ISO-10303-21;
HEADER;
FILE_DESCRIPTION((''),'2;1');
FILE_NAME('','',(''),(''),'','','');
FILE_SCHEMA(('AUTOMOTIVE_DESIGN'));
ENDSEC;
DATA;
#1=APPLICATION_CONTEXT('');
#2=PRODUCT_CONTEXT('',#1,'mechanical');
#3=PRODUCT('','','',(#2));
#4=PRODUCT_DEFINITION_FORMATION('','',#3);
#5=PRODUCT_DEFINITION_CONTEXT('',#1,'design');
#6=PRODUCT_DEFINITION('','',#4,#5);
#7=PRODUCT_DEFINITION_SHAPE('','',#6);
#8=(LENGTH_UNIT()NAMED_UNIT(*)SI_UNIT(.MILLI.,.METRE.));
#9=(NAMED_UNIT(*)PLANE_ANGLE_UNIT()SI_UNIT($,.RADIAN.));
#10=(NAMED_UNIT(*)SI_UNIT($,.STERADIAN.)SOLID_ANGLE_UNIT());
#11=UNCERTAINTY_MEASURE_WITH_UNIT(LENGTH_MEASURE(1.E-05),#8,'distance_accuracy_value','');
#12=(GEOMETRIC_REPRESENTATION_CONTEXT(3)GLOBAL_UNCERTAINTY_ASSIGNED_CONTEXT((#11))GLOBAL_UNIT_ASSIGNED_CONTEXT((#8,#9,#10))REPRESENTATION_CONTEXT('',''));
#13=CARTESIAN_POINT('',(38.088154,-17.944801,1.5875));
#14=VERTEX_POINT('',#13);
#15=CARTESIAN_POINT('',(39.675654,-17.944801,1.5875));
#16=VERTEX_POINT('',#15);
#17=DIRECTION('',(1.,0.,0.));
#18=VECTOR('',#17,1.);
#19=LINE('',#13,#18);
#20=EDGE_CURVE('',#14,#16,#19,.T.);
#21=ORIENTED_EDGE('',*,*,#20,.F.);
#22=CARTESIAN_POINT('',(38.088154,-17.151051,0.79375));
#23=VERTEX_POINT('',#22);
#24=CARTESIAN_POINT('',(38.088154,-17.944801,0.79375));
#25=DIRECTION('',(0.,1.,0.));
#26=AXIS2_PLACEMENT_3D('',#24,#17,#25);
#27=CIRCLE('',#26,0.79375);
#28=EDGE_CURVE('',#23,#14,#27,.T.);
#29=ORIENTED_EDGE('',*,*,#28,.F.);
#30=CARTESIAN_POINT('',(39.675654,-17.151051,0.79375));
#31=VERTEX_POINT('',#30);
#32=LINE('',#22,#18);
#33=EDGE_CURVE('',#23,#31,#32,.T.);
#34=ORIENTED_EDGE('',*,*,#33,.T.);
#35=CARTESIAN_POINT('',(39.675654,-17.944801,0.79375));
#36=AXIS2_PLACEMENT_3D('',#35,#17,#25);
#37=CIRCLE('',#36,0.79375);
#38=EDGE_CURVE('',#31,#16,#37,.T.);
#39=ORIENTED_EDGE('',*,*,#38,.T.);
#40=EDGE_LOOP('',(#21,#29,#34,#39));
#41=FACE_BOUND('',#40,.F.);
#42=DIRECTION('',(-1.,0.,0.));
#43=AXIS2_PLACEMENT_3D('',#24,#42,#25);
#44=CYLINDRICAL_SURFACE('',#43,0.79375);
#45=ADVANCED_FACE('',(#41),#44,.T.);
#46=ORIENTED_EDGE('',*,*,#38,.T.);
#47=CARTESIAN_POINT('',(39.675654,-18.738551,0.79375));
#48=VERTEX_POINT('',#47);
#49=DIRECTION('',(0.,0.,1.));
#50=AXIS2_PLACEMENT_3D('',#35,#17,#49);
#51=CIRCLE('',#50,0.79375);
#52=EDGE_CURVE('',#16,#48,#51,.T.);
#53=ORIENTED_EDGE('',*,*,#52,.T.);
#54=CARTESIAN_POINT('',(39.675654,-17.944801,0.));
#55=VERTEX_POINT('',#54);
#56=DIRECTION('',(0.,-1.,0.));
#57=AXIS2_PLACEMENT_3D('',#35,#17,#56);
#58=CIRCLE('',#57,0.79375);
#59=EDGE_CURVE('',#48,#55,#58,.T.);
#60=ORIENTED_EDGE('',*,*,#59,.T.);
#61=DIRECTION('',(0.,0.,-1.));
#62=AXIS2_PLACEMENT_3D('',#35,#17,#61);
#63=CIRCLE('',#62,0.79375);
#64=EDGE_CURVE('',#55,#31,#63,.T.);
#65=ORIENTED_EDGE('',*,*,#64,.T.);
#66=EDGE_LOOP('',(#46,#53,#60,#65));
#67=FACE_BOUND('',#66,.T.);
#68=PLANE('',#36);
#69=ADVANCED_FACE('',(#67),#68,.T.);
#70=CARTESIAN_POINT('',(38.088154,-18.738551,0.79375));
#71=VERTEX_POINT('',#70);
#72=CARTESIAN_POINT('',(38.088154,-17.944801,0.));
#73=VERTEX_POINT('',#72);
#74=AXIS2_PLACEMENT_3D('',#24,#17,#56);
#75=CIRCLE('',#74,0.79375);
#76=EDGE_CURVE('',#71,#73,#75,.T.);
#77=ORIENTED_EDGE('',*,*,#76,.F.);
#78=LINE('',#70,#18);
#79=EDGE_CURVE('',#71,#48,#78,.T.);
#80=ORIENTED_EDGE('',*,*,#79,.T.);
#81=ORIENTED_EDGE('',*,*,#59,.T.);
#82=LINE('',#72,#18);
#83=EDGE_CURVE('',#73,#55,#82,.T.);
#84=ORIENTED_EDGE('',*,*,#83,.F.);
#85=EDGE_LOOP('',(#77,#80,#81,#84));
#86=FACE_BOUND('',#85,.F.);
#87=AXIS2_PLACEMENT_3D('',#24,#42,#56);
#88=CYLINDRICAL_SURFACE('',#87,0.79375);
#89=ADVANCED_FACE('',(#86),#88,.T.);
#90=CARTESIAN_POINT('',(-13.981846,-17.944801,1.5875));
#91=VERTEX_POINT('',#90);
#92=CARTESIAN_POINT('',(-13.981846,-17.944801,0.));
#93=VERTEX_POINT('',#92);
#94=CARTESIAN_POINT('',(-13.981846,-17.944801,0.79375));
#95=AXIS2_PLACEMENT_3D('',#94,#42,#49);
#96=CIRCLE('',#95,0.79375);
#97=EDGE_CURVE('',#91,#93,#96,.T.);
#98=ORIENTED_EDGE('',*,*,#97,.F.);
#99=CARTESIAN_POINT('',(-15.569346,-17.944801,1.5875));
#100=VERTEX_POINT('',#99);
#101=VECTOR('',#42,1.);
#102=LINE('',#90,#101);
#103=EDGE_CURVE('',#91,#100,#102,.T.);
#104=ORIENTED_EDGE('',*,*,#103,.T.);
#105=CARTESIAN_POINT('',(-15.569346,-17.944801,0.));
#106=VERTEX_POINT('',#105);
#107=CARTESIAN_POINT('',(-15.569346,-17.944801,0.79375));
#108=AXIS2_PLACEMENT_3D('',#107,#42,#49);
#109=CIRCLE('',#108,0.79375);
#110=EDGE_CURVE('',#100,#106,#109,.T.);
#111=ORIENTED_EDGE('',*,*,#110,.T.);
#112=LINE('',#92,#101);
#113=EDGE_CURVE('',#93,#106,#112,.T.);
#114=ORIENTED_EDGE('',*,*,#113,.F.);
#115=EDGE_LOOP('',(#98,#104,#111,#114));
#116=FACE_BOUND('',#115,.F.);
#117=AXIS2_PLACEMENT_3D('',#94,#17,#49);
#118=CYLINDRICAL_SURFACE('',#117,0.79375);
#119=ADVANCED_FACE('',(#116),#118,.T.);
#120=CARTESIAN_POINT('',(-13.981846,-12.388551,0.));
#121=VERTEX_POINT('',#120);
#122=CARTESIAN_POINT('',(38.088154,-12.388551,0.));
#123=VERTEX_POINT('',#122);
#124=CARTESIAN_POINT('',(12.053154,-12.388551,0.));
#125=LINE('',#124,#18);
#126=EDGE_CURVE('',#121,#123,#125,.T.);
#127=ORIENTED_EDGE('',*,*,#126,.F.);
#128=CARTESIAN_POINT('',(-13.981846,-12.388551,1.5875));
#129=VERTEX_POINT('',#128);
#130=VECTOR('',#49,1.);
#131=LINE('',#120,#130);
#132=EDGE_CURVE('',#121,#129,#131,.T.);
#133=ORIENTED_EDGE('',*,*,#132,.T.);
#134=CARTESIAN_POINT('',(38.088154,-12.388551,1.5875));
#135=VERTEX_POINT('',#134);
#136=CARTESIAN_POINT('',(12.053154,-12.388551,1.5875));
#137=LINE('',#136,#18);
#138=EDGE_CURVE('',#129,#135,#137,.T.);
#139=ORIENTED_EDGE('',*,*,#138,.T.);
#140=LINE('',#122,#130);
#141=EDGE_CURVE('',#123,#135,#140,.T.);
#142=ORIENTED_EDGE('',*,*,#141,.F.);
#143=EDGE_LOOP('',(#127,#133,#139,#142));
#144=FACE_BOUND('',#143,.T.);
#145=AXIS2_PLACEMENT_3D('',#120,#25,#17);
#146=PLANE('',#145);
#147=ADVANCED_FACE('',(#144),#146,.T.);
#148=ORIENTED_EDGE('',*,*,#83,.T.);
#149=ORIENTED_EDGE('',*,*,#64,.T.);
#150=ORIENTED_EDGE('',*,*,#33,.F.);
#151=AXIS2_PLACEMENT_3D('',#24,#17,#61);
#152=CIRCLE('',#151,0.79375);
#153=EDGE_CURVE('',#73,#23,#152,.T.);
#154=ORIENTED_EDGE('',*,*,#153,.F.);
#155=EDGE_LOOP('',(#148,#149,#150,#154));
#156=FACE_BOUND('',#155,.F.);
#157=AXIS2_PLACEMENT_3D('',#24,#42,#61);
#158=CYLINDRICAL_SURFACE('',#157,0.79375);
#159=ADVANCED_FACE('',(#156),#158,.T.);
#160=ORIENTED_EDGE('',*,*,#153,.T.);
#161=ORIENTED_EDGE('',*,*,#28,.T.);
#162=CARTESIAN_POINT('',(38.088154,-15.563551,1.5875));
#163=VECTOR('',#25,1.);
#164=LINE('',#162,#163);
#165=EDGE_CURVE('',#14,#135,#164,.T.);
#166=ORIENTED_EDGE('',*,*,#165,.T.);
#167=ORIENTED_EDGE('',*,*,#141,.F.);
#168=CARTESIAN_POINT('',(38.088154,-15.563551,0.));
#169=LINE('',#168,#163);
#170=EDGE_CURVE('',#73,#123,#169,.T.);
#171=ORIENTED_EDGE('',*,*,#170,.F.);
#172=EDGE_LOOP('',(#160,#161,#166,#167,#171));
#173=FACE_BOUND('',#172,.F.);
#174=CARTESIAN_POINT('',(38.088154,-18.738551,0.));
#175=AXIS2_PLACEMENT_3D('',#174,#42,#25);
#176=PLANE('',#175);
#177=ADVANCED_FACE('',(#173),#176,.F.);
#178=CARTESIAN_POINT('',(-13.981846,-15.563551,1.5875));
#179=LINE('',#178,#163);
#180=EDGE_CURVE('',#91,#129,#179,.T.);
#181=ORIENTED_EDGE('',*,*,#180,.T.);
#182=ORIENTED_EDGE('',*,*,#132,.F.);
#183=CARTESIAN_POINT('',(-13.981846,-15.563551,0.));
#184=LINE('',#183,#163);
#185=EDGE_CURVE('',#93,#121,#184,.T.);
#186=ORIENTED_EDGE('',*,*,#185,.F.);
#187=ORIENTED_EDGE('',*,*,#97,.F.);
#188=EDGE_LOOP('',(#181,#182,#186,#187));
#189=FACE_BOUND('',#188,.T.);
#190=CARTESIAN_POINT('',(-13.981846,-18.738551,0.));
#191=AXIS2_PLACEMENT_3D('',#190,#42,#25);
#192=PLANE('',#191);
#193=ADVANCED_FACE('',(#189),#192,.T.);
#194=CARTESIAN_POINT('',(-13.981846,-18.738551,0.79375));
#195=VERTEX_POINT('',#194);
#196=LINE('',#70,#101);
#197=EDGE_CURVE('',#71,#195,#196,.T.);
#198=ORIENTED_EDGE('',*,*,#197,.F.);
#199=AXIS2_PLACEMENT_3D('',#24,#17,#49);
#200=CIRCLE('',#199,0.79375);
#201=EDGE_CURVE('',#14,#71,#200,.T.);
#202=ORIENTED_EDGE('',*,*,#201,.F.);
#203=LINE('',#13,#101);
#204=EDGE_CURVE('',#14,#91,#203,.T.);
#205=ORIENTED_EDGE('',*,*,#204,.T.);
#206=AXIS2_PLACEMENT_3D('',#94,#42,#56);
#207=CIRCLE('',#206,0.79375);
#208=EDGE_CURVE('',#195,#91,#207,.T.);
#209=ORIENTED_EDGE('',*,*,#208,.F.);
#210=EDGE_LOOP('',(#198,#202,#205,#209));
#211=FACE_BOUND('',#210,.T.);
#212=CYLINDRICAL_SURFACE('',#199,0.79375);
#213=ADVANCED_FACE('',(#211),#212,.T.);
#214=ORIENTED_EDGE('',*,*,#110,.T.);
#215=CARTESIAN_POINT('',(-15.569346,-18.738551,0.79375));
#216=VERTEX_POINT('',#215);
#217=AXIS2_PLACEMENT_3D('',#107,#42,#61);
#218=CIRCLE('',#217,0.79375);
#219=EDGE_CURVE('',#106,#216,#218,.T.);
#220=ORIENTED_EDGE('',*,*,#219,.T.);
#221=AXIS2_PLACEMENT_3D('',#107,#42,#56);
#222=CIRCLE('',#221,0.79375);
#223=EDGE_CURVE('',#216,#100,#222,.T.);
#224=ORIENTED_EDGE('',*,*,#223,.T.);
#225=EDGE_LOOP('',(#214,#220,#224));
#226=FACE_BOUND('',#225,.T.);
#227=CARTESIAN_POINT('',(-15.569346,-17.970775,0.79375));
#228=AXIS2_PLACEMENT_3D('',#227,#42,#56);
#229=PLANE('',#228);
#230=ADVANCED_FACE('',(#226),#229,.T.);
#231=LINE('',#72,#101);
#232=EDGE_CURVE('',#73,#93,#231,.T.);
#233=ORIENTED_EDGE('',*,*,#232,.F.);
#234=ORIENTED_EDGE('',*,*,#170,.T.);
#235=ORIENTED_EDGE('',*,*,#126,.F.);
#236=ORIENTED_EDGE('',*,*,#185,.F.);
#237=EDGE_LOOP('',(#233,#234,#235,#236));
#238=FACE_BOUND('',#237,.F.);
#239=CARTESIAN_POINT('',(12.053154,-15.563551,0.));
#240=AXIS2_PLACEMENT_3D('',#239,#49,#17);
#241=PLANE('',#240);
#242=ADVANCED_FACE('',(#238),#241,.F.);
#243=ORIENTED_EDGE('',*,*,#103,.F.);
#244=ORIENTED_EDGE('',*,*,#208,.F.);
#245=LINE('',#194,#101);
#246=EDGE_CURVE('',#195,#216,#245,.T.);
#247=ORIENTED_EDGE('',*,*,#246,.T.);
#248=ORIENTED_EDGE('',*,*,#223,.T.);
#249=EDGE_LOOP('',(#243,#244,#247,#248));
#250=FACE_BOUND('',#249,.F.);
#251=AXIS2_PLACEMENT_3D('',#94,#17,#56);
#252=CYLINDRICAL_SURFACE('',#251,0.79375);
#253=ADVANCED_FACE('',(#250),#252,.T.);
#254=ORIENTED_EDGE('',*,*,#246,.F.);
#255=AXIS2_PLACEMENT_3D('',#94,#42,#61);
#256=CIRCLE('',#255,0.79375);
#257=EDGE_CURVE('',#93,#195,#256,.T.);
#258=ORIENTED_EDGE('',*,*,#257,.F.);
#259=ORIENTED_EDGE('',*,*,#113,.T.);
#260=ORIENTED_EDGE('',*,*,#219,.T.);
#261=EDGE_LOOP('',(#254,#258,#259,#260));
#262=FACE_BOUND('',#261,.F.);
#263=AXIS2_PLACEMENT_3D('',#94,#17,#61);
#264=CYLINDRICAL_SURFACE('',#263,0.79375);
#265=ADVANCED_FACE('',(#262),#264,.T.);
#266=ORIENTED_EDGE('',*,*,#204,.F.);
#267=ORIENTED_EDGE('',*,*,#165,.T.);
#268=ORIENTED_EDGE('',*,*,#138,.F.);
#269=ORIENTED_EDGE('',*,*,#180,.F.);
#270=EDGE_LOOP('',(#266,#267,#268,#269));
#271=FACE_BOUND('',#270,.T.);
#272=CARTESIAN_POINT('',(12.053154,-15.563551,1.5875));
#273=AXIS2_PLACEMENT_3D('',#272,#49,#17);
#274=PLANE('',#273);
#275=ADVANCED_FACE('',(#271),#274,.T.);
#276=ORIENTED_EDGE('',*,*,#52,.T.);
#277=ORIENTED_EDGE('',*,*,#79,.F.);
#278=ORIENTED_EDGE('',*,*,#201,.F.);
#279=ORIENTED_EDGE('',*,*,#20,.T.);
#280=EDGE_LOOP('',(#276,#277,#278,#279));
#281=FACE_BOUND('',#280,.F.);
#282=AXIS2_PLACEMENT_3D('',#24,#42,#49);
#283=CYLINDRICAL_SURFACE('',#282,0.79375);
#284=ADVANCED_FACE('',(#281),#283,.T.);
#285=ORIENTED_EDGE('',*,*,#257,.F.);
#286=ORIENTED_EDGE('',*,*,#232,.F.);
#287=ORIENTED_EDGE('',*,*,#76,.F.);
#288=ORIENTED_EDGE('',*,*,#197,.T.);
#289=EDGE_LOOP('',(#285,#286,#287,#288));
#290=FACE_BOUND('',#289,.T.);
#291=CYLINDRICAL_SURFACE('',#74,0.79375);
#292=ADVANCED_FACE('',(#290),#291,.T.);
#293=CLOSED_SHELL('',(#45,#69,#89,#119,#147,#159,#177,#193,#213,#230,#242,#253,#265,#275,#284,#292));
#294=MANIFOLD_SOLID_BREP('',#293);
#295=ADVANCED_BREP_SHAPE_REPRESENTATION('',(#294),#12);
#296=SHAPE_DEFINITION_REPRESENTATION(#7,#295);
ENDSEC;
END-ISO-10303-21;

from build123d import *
from build123d import SkipClean  # not in build123d's __all__

# Parameters (mm, degrees)
F0_W     = 52.07
F0_H     = 6.35
F1_DEPTH = 1.5875
F3_DEPTH = 1.5875
F5_DEPTH = 1.5875
F6_DEPTH = 52.07


with BuildPart() as f1:
    # F0 (on Top) → F1 (new body)
    with BuildSketch(Plane.XY):
        with Locations((12.0531544089, -15.5635510429)):
            Rectangle(F0_W, F0_H)
    extrude(amount=F1_DEPTH)

    # F2 (on face) → F3 (join)
    with BuildSketch(Plane(origin=(-13.9818455911, 0, 0), x_dir=(0, -1, 0), z_dir=(-1, 0, 0))):
        with BuildLine():
            ThreePointArc((17.9448010429, 0), (18.5060670505, 0.2324839924), (18.7385510429, 0.79375))
            ThreePointArc((18.7385510429, 0.79375), (18.5060670505, 1.3550160076), (17.9448010429, 1.5875))
            ThreePointArc((17.9448010429, 1.5875), (17.1510510429, 0.79375), (17.9448010429, 0))
        make_face()
    extrude(amount=F3_DEPTH)

    # F4 (on face) → F5 (join)
    with BuildSketch(Plane.YZ.offset(38.0881544089)):
        with BuildLine():
            ThreePointArc((-17.9448010429, 0), (-17.3835350353, 0.2324839924), (-17.1510510429, 0.79375))
            ThreePointArc((-17.1510510429, 0.79375), (-17.3835350353, 1.3550160076), (-17.9448010429, 1.5875))
            ThreePointArc((-17.9448010429, 1.5875), (-18.5060670505, 1.3550160076), (-18.7385510429, 0.79375))
            ThreePointArc((-18.7385510429, 0.79375), (-18.5060670505, 0.2324839924), (-17.9448010429, 0))
        make_face()
    extrude(amount=F5_DEPTH)

    # F6 (cut): faces of the model
    f6_faces = [f1.faces().sort_by_distance(p)[0] for p in [
        (38.0881544089, -18.5612527414, 1.4102016985),
        (38.0881544089, -18.5612527414, 0.1772983015),
    ]]
    with SkipClean():  # cleaning this boolean's faces spoils the solid; the shape is the same uncleaned
        extrude(f6_faces, amount=-F6_DEPTH, mode=Mode.SUBTRACT)


solid = f1.part
